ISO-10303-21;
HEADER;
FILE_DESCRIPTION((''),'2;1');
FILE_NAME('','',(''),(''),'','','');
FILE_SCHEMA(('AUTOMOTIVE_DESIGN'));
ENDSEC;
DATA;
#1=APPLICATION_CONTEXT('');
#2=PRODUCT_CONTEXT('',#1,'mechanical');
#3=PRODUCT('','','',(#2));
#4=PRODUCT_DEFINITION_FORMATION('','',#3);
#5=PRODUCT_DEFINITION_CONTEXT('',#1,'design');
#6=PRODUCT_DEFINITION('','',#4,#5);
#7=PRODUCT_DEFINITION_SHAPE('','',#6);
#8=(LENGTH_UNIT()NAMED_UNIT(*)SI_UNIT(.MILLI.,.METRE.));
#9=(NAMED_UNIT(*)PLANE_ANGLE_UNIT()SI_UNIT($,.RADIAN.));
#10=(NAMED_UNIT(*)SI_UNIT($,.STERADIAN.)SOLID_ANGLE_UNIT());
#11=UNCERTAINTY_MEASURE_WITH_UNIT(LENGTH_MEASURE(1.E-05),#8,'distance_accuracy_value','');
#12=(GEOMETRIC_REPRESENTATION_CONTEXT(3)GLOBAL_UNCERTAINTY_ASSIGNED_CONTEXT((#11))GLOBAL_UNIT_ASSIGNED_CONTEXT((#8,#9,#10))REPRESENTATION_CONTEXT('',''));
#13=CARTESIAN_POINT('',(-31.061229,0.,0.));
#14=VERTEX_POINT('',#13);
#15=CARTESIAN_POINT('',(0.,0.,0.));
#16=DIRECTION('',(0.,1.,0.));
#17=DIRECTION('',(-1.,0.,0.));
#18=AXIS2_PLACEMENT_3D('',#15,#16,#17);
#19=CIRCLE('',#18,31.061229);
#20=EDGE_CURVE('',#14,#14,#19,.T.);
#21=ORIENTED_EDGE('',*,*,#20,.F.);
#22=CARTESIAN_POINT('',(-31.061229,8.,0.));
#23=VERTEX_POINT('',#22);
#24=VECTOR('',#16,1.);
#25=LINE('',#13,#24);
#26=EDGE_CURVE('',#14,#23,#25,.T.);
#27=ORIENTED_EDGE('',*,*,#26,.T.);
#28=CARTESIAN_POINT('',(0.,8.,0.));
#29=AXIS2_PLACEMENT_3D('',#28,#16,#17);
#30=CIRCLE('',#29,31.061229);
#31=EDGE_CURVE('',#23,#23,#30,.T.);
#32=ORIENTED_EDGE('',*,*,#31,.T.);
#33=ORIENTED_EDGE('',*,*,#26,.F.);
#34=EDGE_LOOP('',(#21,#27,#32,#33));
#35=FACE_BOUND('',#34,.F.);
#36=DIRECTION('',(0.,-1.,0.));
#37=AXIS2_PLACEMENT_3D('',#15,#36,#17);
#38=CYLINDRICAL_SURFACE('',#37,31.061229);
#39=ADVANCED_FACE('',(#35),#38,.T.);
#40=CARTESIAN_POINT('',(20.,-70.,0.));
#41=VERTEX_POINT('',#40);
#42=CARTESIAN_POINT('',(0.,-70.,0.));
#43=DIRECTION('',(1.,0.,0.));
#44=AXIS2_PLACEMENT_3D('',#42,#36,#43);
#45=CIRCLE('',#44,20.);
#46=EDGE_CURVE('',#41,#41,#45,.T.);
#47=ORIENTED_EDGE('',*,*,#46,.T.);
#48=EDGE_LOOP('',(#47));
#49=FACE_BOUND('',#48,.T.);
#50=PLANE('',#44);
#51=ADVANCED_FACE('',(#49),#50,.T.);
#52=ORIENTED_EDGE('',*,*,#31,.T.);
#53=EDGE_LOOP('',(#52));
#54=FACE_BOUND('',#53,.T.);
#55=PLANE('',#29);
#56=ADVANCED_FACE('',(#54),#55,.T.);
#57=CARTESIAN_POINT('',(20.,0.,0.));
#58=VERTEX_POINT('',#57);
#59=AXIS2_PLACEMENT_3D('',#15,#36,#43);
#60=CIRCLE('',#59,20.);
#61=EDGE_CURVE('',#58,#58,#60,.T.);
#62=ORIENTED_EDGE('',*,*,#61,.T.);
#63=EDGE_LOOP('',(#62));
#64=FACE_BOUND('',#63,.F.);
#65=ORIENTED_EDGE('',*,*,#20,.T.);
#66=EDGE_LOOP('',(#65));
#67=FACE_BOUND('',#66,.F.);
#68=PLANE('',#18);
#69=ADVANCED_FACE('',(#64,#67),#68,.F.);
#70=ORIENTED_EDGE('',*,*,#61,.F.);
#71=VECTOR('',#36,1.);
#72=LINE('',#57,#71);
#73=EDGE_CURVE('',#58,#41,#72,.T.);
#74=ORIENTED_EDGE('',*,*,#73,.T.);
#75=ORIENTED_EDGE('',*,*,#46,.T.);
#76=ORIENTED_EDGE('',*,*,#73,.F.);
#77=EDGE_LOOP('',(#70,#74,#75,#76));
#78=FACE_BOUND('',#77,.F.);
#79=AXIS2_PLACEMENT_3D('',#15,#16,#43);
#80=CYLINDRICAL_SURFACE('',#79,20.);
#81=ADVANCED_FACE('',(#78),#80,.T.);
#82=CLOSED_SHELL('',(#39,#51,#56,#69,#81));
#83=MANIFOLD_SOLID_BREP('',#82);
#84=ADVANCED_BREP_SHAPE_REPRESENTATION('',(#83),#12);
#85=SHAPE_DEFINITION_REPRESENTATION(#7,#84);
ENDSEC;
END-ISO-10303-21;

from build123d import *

# Parameters (mm, degrees)
F0_R     = 20
F1_DEPTH = 70
F2_R     = 31.0612290884
F2_R_2   = 20
F3_DEPTH = 8


with BuildPart() as f1:
    # F0 (on Front) → F1 (new body)
    with BuildSketch(Plane.XZ):
        Circle(F0_R)
    extrude(amount=F1_DEPTH)

    # F2 (on face) → F3 (join)
    with BuildSketch(Plane(origin=(0, 0, 0), x_dir=(-1, 0, 0), z_dir=(0, 1, 0))):
        Circle(F2_R)
        Circle(F2_R_2, mode=Mode.SUBTRACT)
        Circle(F2_R_2)
    extrude(amount=F3_DEPTH)


solid = f1.part
